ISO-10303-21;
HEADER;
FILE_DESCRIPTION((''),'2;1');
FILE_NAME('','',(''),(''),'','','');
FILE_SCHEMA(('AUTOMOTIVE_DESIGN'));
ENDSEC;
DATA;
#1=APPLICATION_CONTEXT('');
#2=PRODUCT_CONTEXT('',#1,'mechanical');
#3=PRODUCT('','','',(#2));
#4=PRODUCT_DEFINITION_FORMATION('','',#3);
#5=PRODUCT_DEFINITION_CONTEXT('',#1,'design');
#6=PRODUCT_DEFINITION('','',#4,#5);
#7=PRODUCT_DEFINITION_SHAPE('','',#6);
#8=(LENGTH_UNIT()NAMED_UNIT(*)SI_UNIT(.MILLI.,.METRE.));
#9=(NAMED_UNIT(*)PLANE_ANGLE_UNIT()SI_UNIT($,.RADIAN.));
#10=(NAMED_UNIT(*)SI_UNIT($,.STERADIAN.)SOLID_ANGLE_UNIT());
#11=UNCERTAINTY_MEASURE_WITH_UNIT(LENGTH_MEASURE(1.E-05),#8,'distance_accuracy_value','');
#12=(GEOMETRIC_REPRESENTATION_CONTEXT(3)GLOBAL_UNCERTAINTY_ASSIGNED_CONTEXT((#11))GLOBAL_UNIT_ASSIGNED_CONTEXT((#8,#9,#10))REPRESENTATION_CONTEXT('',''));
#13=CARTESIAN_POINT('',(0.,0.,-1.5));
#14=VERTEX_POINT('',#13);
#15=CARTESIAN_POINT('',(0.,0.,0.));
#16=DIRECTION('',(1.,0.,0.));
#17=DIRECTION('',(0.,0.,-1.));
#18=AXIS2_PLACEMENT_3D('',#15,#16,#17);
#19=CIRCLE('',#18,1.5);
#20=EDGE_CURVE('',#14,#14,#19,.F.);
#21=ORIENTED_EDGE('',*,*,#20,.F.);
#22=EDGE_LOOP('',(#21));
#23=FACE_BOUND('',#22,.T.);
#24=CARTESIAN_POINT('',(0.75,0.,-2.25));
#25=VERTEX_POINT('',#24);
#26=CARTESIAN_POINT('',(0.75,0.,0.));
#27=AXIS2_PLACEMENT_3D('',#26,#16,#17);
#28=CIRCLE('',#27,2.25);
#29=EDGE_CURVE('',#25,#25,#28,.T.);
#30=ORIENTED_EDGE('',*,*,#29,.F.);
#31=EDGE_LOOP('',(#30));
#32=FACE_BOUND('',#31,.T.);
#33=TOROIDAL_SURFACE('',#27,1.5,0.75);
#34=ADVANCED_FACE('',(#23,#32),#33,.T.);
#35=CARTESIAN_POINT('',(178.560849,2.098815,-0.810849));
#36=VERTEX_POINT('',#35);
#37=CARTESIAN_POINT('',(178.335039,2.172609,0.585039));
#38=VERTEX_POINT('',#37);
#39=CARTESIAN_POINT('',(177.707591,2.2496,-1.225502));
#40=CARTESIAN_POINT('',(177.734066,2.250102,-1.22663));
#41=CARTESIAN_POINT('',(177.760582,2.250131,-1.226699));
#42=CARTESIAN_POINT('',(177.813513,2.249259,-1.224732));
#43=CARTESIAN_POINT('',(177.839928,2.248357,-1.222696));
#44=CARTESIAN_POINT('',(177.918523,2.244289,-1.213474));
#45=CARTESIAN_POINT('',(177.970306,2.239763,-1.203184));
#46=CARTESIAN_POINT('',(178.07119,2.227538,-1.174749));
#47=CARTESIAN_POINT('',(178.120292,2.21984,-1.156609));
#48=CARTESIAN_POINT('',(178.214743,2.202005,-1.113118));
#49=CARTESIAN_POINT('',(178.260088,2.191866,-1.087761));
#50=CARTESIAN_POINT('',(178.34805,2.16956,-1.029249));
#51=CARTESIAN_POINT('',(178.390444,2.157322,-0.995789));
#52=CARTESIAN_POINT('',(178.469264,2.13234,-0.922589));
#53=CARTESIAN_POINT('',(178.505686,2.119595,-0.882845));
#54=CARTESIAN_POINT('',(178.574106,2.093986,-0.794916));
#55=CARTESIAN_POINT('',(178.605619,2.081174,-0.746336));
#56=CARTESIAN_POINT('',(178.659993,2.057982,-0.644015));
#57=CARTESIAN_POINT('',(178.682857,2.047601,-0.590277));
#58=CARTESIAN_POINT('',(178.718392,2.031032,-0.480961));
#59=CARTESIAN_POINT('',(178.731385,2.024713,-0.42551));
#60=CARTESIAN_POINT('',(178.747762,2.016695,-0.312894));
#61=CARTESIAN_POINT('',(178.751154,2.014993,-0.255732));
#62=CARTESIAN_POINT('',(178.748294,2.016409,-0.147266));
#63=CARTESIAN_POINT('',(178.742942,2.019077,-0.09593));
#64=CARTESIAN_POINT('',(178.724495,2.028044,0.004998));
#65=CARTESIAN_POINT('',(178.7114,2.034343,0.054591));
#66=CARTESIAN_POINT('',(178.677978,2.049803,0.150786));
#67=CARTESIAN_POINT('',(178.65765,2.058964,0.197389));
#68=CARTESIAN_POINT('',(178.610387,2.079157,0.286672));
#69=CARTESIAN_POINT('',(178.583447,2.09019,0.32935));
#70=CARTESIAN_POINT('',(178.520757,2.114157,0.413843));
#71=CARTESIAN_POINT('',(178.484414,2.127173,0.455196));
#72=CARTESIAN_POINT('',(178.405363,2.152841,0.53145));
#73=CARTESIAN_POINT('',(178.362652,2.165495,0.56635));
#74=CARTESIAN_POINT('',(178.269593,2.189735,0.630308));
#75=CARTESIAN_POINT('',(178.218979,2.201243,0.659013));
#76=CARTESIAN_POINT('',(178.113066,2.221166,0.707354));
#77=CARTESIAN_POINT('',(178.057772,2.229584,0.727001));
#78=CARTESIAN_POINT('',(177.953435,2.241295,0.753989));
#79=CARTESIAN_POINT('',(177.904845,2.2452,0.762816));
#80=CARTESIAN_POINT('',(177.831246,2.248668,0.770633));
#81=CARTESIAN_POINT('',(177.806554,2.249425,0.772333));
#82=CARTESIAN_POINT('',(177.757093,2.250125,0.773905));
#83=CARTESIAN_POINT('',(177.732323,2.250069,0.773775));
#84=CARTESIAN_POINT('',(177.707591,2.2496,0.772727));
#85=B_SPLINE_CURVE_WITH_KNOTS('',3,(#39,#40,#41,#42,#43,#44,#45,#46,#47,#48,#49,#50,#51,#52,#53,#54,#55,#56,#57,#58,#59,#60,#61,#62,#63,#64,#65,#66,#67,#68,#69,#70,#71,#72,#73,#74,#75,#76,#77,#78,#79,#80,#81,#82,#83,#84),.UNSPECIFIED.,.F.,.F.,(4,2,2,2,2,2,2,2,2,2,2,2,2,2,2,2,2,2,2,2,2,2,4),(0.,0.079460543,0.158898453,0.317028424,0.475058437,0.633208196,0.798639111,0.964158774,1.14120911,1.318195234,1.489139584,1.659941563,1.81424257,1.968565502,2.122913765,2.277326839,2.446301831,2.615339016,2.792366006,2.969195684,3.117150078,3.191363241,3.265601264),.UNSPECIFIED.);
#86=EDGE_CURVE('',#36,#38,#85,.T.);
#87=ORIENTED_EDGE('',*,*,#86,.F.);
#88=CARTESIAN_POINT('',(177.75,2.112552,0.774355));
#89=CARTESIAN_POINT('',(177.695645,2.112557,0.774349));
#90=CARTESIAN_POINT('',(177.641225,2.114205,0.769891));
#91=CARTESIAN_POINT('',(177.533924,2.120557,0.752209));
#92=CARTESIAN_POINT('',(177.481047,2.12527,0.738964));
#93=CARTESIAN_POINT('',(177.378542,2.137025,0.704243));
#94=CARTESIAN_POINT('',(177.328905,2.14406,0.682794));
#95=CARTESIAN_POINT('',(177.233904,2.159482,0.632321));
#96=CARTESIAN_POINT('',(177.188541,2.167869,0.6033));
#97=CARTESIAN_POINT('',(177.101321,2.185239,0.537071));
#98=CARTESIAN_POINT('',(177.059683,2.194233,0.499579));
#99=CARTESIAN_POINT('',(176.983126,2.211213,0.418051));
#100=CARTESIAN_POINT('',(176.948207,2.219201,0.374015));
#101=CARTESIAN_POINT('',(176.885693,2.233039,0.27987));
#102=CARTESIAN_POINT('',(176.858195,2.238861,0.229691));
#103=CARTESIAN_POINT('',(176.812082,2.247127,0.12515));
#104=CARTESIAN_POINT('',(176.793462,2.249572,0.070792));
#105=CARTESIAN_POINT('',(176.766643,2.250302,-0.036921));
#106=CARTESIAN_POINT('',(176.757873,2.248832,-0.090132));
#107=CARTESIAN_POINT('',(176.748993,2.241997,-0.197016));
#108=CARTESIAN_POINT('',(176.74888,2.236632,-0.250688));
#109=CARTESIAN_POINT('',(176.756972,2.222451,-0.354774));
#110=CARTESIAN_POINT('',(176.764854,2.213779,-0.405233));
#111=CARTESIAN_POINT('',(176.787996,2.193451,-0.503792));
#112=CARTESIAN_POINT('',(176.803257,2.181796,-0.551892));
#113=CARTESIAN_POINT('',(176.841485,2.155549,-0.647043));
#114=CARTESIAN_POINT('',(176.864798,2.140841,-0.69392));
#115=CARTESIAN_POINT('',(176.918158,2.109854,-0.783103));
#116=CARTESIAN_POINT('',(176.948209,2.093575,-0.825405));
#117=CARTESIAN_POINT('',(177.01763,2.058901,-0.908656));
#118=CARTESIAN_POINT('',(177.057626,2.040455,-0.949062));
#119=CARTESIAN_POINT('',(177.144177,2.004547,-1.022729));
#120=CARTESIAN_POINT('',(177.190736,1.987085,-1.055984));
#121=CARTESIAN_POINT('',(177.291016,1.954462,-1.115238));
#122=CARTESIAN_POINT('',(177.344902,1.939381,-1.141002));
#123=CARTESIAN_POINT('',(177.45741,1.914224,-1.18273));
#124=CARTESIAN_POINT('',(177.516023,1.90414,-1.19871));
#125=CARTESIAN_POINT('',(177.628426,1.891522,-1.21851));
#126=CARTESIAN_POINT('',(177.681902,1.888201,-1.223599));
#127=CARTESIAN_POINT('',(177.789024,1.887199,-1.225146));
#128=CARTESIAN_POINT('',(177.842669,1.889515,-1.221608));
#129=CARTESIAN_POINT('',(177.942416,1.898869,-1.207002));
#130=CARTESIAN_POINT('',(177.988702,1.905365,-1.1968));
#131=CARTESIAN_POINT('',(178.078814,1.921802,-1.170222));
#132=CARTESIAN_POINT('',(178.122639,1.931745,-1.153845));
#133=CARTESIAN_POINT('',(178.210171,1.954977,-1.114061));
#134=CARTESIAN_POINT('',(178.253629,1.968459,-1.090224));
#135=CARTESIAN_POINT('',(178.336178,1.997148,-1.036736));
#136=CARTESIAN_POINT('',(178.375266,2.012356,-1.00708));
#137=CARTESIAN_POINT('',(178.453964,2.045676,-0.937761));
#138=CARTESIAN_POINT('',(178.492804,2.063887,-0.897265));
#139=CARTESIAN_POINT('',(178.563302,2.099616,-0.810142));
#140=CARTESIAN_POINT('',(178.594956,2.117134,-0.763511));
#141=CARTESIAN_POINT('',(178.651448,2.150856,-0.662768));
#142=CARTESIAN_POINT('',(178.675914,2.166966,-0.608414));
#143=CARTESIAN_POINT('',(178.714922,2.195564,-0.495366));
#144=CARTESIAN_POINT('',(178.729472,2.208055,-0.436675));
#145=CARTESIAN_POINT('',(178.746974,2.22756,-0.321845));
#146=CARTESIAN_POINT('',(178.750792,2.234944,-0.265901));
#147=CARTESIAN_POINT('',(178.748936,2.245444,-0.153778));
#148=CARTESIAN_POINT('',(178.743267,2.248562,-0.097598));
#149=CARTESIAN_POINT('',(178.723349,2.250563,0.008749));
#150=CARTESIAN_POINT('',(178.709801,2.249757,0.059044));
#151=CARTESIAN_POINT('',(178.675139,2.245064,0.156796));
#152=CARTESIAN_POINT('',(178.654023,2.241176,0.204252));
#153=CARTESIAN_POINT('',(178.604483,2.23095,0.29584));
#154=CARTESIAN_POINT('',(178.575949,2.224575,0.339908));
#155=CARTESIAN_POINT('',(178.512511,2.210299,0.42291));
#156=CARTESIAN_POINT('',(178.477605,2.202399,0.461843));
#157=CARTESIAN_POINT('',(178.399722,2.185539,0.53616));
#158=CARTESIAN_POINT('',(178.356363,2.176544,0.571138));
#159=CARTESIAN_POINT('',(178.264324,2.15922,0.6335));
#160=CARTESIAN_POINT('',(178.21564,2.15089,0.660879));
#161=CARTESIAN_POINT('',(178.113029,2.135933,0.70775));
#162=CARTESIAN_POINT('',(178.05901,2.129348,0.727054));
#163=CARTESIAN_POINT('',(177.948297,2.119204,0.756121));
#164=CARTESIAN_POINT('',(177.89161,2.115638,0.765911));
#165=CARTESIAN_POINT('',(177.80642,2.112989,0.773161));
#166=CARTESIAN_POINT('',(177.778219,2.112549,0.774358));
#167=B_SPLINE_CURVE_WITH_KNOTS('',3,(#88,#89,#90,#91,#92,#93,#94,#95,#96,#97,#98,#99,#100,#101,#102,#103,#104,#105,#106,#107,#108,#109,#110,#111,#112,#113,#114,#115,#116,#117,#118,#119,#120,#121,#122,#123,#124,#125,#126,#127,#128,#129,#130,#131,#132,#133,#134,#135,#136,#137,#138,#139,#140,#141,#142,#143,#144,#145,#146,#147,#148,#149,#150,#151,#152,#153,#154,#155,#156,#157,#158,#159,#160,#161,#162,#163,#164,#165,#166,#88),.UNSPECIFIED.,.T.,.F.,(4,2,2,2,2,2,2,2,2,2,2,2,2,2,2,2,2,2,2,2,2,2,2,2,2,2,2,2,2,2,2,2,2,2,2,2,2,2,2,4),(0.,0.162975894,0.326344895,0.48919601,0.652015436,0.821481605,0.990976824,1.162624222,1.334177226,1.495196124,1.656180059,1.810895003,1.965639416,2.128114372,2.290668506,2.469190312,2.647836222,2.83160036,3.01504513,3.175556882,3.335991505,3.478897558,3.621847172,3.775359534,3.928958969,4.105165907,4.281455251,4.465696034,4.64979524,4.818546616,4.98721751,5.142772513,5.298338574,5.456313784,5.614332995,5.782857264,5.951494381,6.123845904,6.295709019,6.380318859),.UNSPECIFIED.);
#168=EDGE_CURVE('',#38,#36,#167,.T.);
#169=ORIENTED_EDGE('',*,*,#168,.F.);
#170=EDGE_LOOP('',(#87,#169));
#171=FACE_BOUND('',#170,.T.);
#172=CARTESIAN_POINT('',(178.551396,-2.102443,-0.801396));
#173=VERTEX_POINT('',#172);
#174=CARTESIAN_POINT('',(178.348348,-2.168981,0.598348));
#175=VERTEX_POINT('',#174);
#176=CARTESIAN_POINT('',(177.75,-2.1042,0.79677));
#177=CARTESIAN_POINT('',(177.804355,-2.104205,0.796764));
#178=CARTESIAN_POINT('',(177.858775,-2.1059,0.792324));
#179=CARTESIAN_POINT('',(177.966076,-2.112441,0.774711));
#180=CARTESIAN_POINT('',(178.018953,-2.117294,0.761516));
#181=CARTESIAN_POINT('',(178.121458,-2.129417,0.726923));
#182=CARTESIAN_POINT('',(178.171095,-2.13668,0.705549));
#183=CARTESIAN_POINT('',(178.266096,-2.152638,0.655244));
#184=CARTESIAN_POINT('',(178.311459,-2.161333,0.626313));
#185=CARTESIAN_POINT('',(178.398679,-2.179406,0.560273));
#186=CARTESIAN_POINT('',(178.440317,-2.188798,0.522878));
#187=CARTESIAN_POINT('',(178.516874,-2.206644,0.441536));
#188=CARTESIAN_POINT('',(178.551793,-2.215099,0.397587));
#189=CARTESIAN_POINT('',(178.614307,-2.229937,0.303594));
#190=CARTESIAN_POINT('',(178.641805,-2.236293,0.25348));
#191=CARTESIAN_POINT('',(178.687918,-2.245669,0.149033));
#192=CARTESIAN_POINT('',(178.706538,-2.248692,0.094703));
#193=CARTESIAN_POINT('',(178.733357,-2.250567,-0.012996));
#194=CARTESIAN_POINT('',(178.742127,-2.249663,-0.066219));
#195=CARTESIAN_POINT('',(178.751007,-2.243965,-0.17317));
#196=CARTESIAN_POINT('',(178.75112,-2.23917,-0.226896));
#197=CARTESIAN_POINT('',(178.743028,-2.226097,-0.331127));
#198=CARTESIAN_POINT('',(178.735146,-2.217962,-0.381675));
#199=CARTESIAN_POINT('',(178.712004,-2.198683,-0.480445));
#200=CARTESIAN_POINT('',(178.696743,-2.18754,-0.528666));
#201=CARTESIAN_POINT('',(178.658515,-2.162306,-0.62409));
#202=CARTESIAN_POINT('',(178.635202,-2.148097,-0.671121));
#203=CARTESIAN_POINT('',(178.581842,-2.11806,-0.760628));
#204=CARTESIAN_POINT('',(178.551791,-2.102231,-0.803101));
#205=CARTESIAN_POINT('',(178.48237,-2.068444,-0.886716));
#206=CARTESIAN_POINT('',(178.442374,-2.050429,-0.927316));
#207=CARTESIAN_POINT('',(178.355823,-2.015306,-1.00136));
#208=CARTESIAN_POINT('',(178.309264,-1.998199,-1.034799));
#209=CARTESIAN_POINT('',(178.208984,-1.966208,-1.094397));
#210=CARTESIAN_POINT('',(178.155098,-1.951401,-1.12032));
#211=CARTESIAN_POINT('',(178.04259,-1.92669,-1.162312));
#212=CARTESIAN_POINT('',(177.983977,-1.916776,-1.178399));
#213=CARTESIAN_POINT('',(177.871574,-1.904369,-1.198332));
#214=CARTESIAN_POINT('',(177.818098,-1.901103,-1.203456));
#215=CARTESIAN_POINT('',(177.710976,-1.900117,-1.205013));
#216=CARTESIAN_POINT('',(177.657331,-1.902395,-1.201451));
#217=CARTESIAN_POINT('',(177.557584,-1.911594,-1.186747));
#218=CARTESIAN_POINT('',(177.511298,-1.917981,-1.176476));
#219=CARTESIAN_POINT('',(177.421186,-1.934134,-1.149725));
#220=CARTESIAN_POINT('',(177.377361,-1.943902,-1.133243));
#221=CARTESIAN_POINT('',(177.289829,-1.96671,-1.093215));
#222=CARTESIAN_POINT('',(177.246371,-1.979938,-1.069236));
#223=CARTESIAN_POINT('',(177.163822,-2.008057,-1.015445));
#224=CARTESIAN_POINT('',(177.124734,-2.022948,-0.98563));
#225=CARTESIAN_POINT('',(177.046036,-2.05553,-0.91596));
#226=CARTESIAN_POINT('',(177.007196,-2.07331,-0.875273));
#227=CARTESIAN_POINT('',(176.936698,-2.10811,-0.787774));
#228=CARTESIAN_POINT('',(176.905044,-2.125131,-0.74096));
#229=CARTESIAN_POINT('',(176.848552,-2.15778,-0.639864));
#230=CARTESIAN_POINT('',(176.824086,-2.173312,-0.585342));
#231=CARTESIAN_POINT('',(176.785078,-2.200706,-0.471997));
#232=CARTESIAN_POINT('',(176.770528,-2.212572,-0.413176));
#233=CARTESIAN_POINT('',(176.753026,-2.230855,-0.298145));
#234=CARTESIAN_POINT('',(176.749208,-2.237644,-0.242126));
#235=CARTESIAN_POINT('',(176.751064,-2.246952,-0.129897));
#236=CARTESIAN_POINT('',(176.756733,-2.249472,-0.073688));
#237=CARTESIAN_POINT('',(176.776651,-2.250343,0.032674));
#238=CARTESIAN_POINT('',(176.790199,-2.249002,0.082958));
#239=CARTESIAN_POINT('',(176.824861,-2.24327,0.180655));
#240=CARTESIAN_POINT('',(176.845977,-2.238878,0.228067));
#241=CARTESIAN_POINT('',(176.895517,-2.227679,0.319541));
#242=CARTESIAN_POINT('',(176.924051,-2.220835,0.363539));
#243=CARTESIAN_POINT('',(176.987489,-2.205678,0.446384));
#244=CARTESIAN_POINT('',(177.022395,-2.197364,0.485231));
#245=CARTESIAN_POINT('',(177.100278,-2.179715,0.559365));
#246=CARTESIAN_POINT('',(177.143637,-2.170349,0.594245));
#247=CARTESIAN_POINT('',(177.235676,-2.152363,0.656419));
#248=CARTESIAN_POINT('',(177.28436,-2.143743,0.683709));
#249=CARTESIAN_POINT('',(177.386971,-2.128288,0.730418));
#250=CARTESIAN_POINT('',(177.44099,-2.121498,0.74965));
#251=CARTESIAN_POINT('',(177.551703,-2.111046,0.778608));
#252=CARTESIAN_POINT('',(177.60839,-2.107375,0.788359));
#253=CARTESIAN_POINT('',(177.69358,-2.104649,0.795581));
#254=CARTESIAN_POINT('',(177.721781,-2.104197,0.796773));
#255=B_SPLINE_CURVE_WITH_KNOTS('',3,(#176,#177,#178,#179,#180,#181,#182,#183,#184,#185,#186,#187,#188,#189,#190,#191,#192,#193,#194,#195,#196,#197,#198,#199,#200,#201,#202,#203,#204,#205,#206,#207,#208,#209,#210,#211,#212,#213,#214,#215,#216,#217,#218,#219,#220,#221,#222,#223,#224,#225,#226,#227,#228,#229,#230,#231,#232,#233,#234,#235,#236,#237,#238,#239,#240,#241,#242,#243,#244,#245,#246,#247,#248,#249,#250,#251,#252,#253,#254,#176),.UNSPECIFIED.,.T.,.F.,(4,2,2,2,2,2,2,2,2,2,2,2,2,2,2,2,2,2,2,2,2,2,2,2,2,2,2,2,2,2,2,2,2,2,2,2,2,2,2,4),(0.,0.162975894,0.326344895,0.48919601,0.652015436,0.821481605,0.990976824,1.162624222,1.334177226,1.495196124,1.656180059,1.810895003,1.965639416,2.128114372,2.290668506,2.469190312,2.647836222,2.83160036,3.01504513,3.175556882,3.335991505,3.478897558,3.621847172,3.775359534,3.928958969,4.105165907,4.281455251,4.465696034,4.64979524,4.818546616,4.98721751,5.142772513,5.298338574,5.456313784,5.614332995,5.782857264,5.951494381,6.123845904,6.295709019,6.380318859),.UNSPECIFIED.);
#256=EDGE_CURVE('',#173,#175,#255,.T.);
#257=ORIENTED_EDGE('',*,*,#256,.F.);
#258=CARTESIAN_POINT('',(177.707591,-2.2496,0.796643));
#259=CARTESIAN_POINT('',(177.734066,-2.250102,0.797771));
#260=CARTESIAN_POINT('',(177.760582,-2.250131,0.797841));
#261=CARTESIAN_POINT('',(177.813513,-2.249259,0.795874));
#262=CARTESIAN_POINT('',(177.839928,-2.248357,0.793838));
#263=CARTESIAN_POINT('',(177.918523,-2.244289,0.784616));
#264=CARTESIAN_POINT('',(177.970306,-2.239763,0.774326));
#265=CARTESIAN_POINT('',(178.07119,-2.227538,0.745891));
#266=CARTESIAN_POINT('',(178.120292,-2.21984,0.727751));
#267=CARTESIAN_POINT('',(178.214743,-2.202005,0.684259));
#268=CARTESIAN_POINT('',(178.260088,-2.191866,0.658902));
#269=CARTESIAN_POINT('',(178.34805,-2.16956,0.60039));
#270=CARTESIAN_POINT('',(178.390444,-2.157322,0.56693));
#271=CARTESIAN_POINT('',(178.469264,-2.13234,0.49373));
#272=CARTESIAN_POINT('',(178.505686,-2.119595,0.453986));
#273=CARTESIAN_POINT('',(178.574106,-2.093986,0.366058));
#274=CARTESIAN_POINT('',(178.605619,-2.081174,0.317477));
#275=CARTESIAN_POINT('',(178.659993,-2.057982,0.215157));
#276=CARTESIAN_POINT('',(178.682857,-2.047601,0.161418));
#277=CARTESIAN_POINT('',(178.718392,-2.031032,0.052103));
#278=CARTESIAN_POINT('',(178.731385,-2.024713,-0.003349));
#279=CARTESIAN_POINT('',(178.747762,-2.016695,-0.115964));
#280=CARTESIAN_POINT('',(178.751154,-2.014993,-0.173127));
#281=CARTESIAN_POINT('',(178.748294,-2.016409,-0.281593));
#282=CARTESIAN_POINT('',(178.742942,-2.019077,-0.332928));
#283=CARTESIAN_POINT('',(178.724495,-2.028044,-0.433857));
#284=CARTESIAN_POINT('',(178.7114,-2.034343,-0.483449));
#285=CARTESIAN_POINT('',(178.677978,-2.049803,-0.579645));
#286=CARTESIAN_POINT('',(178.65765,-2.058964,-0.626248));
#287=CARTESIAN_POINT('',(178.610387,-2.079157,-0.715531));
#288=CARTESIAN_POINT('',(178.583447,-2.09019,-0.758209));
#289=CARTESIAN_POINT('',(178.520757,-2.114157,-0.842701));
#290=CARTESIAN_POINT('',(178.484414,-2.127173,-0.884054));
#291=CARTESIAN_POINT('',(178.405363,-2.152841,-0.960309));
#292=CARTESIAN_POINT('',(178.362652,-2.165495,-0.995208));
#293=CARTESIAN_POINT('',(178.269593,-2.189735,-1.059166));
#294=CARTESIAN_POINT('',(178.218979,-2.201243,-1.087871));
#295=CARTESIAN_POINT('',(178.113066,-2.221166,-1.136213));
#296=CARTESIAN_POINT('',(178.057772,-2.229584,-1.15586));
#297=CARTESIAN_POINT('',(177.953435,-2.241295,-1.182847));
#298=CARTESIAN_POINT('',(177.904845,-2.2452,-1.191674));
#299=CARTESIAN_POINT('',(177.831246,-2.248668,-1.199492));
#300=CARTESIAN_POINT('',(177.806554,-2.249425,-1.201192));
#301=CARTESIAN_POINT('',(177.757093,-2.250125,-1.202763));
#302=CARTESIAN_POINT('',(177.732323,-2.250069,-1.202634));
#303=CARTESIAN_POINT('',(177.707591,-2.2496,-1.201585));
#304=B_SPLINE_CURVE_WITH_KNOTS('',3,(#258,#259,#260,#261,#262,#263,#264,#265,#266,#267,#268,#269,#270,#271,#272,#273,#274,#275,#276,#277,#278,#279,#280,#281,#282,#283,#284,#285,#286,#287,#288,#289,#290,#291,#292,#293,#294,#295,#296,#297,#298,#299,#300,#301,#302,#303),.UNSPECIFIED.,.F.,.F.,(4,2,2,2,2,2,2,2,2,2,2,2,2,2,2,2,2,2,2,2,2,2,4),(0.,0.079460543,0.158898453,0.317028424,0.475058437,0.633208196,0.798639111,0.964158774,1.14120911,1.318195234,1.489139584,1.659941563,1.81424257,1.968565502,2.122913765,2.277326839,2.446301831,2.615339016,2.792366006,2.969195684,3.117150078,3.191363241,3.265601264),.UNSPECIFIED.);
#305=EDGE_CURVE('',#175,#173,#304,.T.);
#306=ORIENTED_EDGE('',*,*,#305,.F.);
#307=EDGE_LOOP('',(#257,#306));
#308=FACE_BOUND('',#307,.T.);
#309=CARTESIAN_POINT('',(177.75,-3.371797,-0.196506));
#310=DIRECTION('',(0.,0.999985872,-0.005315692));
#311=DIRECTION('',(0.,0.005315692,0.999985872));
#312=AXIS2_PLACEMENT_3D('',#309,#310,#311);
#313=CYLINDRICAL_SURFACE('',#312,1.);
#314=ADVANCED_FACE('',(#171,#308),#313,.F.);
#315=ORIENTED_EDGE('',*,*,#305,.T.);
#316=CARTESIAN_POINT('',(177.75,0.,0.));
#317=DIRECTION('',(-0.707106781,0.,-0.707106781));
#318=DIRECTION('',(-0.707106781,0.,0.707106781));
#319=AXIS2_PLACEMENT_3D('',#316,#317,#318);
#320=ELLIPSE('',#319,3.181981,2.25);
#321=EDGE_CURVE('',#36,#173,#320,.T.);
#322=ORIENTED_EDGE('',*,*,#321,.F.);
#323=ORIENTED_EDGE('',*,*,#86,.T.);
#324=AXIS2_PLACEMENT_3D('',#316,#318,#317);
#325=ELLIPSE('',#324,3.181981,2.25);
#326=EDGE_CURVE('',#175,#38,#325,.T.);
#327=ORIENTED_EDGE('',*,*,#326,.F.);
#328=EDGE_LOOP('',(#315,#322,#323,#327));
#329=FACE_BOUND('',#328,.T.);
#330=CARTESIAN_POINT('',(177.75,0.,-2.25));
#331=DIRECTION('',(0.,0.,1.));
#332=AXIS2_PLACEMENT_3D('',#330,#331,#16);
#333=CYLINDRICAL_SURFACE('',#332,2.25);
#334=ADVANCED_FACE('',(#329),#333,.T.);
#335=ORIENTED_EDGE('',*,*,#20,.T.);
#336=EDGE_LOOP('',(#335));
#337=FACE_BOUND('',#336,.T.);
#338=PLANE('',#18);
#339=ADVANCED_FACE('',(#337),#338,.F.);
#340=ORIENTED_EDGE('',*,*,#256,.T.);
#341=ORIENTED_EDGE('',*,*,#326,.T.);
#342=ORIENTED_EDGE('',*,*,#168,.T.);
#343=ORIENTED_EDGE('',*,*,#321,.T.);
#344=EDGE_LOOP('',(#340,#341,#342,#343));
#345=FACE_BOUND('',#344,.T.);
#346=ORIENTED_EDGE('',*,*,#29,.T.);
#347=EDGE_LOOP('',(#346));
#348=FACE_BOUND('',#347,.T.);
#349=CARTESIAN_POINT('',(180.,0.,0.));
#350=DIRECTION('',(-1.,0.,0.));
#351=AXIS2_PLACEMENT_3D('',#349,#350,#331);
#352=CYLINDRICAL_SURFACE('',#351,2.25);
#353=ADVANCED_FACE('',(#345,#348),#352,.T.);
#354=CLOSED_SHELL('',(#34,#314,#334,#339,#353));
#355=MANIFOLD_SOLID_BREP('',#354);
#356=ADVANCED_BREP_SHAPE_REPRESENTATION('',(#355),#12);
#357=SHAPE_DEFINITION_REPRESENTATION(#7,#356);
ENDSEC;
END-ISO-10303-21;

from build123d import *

# Parameters (mm, degrees)
SKETCH1_R               = 2.25
BOSS_EXTRUDE1_DEPTH     = 180
FILLET1_R               = 0.75
CUT_EXTRUDE1_DEPTH      = 181.028122803
CUT_EXTRUDE1_DEPTH_BACK = 181.028122803
CAVITY1_OUTLINE_W       = 1
CAVITY1_OUTLINE_H       = 4.503251691


# Read off the part's stored shape, not the designer's step: Cavity1
with BuildPart() as part:
    # Sketch1 → Boss-Extrude1 (new body)
    with BuildSketch(Plane(origin=(0, 0, 0), x_dir=(0, 0, -1), z_dir=(1, 0, 0))):
        with Locations(Location((0, 0, 0), (0, 0, 180))):
            Circle(SKETCH1_R)
    extrude(amount=BOSS_EXTRUDE1_DEPTH)

    # Fillet1
    fillet1_edges = [part.edges().sort_by_distance(p)[0] for p in [
        (0, 0, -2.25),
    ]]
    fillet(fillet1_edges, radius=FILLET1_R)

    # Sketch2 → Cut-Extrude1 (cut, two sides: drawn at the far end of the back side and taken through both)
    with BuildSketch(Plane.XY.offset(-CUT_EXTRUDE1_DEPTH_BACK)):
        with BuildLine():
            Line((180, 2.25), (177.75, 2.25))
            ThreePointArc((177.75, 2.25), (179.340990258, 1.590990258), (180, 0))
            Line((180, 0), (180, 2.25))
        make_face()
        with BuildLine():
            Line((180, -2.25), (180, 0))
            ThreePointArc((180, 0), (179.340990258, -1.590990258), (177.75, -2.25))
            Line((177.75, -2.25), (180, -2.25))
        make_face()
    extrude(amount=CUT_EXTRUDE1_DEPTH + CUT_EXTRUDE1_DEPTH_BACK, mode=Mode.SUBTRACT)

    # Cavity1 outline → Cavity1 (revolve, cut)
    with BuildSketch(Plane(origin=(177.75, -0.001139824, -0.214423248), x_dir=(1, 0, 0), z_dir=(0, 0.005315692237830849, 0.9999858716082107))):
        with Locations((0.5, 0.001514697)):
            Rectangle(CAVITY1_OUTLINE_W, CAVITY1_OUTLINE_H)
    revolve(axis=Axis((177.75, -0.001139824, -0.214423248), (0, 0.9999858716082107, -0.005315692237830849)), mode=Mode.SUBTRACT)


solid = part.part
